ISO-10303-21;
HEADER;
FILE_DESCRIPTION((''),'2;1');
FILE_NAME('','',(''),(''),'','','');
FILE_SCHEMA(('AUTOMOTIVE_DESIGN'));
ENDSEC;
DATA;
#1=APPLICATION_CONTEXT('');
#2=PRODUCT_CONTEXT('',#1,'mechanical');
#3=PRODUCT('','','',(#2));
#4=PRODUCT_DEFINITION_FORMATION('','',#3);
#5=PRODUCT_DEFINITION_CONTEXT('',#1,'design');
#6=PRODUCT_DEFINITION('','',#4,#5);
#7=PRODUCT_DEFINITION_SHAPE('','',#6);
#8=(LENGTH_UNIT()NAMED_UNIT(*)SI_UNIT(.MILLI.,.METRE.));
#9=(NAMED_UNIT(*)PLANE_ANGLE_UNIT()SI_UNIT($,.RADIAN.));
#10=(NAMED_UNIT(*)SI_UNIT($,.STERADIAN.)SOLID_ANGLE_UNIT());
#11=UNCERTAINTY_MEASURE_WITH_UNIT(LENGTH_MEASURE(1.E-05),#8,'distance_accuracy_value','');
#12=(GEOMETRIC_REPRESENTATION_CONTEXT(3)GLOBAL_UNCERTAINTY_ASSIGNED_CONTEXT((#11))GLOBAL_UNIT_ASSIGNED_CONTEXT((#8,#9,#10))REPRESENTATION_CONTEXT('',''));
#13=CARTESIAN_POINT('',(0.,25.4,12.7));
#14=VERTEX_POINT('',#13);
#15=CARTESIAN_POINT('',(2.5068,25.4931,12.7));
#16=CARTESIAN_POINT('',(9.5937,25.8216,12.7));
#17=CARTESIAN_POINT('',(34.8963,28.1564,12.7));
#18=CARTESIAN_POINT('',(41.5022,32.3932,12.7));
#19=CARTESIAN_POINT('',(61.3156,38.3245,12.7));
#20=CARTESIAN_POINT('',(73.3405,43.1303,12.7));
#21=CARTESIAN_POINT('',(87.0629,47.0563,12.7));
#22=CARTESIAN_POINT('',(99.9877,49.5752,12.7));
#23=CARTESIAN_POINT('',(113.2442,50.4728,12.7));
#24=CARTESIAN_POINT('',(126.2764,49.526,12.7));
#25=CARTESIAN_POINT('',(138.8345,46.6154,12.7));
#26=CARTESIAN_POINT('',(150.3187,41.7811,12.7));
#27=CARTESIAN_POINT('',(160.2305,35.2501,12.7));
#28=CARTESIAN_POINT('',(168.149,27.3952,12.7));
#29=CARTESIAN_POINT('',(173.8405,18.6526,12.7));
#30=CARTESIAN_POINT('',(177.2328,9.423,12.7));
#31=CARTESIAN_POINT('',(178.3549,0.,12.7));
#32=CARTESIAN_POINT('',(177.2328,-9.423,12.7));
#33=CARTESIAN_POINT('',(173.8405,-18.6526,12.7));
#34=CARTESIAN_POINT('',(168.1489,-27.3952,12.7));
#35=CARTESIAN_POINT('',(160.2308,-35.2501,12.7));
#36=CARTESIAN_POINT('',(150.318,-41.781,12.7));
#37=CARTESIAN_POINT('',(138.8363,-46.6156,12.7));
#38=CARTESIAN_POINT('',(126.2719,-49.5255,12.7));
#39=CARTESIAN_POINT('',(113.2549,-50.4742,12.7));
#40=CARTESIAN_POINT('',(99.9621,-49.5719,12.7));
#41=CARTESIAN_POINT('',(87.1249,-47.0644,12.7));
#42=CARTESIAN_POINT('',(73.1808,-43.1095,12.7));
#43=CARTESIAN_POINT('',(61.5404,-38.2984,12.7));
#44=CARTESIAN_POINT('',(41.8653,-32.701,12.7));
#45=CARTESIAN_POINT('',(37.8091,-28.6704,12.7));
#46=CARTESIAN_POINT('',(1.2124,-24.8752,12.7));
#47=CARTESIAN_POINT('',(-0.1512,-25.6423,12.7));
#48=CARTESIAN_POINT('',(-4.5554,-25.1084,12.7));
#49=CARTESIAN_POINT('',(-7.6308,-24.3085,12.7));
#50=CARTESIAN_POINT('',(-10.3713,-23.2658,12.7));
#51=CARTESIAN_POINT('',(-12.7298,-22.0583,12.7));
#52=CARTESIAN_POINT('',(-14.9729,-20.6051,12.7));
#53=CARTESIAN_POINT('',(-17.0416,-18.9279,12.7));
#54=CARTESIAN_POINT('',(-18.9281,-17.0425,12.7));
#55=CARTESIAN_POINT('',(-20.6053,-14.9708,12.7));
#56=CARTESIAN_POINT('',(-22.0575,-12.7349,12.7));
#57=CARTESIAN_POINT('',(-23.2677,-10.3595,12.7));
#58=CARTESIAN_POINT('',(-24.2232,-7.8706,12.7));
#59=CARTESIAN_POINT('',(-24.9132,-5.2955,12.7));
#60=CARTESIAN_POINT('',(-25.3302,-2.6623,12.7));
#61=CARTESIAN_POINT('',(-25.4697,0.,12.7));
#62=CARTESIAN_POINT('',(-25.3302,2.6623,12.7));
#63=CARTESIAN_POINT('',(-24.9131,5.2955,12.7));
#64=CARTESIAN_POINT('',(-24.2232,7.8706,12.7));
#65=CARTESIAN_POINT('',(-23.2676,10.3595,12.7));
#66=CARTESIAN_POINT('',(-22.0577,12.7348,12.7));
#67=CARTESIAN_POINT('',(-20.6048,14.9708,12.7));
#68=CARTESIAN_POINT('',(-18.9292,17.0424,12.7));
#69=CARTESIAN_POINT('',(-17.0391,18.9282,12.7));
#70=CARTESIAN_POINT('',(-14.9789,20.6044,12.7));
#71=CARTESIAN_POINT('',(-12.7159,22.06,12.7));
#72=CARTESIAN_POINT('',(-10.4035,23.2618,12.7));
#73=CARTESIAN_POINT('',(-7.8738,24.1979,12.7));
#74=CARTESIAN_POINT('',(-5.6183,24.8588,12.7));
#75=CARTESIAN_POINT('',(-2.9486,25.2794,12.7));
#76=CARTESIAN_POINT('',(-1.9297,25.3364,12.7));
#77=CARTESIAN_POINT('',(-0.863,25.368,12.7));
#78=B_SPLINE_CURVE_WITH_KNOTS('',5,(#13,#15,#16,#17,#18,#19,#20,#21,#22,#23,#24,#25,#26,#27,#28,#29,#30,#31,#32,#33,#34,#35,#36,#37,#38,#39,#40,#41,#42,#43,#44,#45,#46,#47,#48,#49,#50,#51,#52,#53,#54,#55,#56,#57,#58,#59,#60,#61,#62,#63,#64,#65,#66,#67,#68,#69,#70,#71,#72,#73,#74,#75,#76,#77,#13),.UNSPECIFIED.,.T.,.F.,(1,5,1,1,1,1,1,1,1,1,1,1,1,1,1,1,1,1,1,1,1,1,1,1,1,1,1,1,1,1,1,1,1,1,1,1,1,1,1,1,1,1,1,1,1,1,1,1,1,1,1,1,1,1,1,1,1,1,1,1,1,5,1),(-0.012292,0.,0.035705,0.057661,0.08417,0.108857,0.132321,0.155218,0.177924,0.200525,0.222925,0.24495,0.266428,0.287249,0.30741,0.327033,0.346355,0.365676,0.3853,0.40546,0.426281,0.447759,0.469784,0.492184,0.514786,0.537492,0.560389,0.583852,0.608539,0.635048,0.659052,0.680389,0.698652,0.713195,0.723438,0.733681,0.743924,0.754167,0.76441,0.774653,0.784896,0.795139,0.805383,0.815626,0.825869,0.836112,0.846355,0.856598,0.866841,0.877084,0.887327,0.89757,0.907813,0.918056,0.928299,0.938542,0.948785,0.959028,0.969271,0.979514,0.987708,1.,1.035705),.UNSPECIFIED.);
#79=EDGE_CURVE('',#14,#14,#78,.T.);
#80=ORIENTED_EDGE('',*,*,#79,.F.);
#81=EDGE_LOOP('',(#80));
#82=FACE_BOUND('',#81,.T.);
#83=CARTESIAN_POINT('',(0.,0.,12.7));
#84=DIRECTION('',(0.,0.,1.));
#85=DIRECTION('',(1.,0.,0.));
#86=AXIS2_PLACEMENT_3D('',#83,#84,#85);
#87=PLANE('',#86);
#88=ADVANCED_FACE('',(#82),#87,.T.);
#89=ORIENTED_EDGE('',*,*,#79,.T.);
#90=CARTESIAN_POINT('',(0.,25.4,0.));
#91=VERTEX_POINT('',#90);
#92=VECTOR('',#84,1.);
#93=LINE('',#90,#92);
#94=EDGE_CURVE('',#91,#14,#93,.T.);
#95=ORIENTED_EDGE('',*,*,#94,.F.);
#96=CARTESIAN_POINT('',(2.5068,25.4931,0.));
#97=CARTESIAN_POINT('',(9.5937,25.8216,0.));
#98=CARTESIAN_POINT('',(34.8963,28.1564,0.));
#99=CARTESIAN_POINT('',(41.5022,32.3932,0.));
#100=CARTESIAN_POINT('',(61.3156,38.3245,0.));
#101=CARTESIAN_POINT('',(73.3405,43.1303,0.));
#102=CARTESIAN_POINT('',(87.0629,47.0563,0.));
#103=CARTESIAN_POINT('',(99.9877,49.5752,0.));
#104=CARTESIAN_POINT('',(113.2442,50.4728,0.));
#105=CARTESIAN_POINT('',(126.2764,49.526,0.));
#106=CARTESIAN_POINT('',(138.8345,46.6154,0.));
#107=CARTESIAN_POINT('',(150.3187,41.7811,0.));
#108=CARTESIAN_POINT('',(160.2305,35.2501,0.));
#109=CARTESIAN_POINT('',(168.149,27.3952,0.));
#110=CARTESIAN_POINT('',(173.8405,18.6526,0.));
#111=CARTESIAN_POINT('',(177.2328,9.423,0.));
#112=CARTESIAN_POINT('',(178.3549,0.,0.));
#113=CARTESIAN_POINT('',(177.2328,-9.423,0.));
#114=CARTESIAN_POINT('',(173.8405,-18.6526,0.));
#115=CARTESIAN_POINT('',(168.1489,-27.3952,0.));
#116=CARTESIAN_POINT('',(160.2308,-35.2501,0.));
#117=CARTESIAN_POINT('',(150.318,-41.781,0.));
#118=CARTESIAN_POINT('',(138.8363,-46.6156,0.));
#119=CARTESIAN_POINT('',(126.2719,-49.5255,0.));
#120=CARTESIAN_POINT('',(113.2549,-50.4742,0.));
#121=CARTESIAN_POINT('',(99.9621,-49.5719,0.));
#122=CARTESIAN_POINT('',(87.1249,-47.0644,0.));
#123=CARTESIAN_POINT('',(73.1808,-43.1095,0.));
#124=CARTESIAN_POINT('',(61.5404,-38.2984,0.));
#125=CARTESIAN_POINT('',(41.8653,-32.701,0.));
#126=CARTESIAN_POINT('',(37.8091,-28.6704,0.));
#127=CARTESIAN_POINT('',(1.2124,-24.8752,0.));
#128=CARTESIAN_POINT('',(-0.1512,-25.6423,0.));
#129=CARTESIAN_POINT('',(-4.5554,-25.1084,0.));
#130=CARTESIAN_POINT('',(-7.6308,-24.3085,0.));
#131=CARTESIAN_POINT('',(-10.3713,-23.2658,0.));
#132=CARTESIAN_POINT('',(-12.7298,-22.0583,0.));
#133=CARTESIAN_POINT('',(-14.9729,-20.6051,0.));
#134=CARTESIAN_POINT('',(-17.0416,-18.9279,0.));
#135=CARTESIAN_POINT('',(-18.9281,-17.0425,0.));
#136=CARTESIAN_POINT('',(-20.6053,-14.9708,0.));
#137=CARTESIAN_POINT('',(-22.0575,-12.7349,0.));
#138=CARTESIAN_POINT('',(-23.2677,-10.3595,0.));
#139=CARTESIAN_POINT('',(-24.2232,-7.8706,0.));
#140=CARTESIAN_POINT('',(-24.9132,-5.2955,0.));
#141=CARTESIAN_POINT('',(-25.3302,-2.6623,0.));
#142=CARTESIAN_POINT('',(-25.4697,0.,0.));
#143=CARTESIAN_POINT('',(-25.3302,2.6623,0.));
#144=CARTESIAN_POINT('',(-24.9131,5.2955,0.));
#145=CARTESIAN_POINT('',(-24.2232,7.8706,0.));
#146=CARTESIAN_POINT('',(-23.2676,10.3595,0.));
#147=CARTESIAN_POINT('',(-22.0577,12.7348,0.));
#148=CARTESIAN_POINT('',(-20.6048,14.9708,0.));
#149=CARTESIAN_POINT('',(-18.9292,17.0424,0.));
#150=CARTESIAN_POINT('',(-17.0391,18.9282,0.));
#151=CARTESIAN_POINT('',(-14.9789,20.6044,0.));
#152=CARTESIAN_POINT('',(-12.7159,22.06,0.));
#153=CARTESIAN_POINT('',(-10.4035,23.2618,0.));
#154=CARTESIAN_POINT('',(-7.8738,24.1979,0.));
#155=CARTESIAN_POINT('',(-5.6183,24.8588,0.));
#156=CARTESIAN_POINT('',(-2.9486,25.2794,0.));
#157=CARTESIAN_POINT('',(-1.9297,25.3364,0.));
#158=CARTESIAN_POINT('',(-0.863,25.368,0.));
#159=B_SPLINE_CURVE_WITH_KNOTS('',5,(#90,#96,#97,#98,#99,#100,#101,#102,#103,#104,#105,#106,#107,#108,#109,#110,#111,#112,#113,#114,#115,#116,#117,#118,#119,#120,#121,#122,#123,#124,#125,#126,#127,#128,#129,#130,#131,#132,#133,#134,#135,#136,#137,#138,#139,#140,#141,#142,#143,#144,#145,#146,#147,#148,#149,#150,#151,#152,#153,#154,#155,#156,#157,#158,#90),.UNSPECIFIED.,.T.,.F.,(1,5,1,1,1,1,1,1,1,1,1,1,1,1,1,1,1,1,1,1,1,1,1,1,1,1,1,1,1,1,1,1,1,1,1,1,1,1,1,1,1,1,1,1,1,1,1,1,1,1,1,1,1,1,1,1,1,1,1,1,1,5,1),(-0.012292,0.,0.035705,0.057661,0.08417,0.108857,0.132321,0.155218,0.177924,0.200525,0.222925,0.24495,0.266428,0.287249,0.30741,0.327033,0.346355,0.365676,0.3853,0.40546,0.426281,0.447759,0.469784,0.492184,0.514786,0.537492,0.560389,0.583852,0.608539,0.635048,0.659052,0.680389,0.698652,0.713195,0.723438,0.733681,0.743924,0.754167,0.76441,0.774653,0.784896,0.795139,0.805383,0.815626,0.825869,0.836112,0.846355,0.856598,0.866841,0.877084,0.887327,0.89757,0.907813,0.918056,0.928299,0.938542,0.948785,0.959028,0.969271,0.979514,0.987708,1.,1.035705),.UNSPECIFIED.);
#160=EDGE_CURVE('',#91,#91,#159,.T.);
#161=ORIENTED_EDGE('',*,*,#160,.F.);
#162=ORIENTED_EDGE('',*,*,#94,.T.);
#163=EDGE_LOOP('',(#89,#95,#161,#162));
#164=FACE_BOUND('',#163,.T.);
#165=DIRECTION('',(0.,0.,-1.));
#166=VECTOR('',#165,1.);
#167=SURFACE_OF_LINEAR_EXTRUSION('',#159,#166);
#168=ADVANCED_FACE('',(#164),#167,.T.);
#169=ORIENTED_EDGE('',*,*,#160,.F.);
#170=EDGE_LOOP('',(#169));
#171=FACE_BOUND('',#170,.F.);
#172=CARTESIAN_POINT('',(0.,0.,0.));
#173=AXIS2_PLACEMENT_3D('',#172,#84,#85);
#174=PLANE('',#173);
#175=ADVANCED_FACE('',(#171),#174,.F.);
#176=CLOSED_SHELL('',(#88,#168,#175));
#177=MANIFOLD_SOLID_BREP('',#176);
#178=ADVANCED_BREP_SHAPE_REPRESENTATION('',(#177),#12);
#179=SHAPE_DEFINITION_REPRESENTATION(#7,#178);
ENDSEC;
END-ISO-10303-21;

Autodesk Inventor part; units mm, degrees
ref_plane "YZ Plane" through (0, 0, 0) normal (1, 0, 0) x (0, 1, 0)
ref_plane "XZ Plane" through (0, 0, 0) normal (0, 1, 0) x (-1, 0, 0)
ref_plane "XY Plane" through (0, 0, 0) normal (0, 0, 1) x (1, 0, 0)
sketch "Main Sketch" plane through (0, 0, 0) normal (0, 0, 1) x (1, 0, 0)
  spline S0 degree 5 poles (0, 25.4) (2.5068, 25.4931) (9.5937, 25.8216) (34.8963, 28.1564) (41.5022, 32.3932) (61.3156, 38.3245) (73.3405, 43.1303) (87.0629, 47.0563) (99.9877, 49.5752) (113.2442, 50.4728) (126.2764, 49.526) (138.8345, 46.6154) (150.3187, 41.7811) (160.2305, 35.2501) (168.149, 27.3952) (173.8405, 18.6526) (177.2328, 9.423) (178.3549, 0) (177.2328, -9.423) (173.8405, -18.6526) (168.1489, -27.3952) (160.2308, -35.2501) (150.318, -41.781) (138.8363, -46.6156) (126.2719, -49.5255) (113.2549, -50.4742) (99.9621, -49.5719) (87.1249, -47.0644) (73.1808, -43.1095) (61.5404, -38.2984) (41.8653, -32.701) (37.8091, -28.6704) (1.2124, -24.8752) (-0.1512, -25.6423) (-4.5554, -25.1084) (-7.6308, -24.3085) (-10.3713, -23.2658) (-12.7298, -22.0583) (-14.9729, -20.6051) (-17.0416, -18.9279) (-18.9281, -17.0425) (-20.6053, -14.9708) (-22.0575, -12.7349) (-23.2677, -10.3595) (-24.2232, -7.8706) (-24.9132, -5.2955) (-25.3302, -2.6623) (-25.4697, 0) (-25.3302, 2.6623) (-24.9131, 5.2955) (-24.2232, 7.8706) (-23.2676, 10.3595) (-22.0577, 12.7348) (-20.6048, 14.9708) (-18.9292, 17.0424) (-17.0391, 18.9282) (-14.9789, 20.6044) (-12.7159, 22.06) (-10.4035, 23.2618) (-7.8738, 24.1979) (-5.6183, 24.8588) (-2.9486, 25.2794) (-1.9297, 25.3364) (-0.863, 25.368) (0, 25.4) knots 0 0 0 0 0 0 0.035705 0.057661 0.08417 0.108857 0.132321 0.155218 0.177924 0.200525 0.222925 0.24495 0.266428 0.287249 0.30741 0.327033 0.346355 0.365676 0.3853 0.40546 0.426281 0.447759 0.469784 0.492184 0.514786 0.537492 0.560389 0.583852 0.608539 0.635048 0.659052 0.680389 0.698652 0.713195 0.723438 0.733681 0.743924 0.754167 0.76441 0.774653 0.784896 0.795139 0.805383 0.815626 0.825869 0.836112 0.846355 0.856598 0.866841 0.877084 0.887327 0.89757 0.907813 0.918056 0.928299 0.938542 0.948785 0.959028 0.969271 0.979514 0.987708 1 1 1 1 1 1
  point P0 (45.8011, 33.2758)
  point P1 (61.5045, 38.701)
  point P2 (74.8325, 43.2834)
  point P3 (87.474, 46.8499)
  point P4 (100.2409, 49.197)
  point P5 (113.3047, 50.0127)
  point P6 (126.4072, 48.9959)
  point P7 (139.0282, 45.9824)
  point P8 (150.5429, 41.0236)
  point P9 (160.3712, 34.3971)
  point P10 (168.1022, 26.5461)
  point P11 (173.5557, 17.9579)
  point P12 (176.7528, 9.0313)
  point P13 (177.8, 0)
  point P14 (176.7528, -9.0313)
  point P15 (173.5557, -17.9579)
  point P16 (168.1022, -26.5461)
  point P17 (160.3712, -34.3971)
  point P18 (150.5429, -41.0236)
  point P19 (139.0282, -45.9824)
  point P20 (126.4072, -48.9959)
  point P21 (113.3047, -50.0127)
  point P22 (100.2409, -49.197)
  point P23 (87.474, -46.8499)
  point P24 (74.8325, -43.2834)
  point P25 (61.5045, -38.701)
  point P26 (45.8011, -33.2758)
  point P27 (25.4096, -27.9142)
  point P28 (0, -25.4)
  point P29 (-2.655, -25.2609)
  point P30 (-5.281, -24.8449)
  point P31 (-7.849, -24.1568)
  point P32 (-10.3311, -23.2041)
  point P33 (-12.7, -21.997)
  point P34 (-14.9297, -20.549)
  point P35 (-16.9959, -18.8759)
  point P36 (-18.8759, -16.9959)
  point P37 (-20.549, -14.9297)
  point P38 (-21.997, -12.7)
  point P39 (-23.2041, -10.3311)
  point P40 (-24.1568, -7.849)
  point P41 (-24.8449, -5.281)
  point P42 (-25.2609, -2.655)
  point P43 (-25.4, 0)
  point P44 (-25.2609, 2.655)
  point P45 (-24.8449, 5.281)
  point P46 (-24.1568, 7.849)
  point P47 (-23.2041, 10.3311)
  point P48 (-21.997, 12.7)
  point P49 (-20.549, 14.9297)
  point P50 (-18.8759, 16.9959)
  point P51 (-16.9959, 18.8759)
  point P52 (-14.9297, 20.549)
  point P53 (-12.7, 21.997)
  point P54 (-10.3311, 23.2041)
  point P55 (-7.849, 24.1568)
  point P56 (-5.281, 24.8449)
  point P57 (-2.655, 25.2609)
extrude "Cam" add sketch "Main Sketch" along normal blind 12.7
properties part number "Disc Cam" material "Stainless Steel, Austenitic"
